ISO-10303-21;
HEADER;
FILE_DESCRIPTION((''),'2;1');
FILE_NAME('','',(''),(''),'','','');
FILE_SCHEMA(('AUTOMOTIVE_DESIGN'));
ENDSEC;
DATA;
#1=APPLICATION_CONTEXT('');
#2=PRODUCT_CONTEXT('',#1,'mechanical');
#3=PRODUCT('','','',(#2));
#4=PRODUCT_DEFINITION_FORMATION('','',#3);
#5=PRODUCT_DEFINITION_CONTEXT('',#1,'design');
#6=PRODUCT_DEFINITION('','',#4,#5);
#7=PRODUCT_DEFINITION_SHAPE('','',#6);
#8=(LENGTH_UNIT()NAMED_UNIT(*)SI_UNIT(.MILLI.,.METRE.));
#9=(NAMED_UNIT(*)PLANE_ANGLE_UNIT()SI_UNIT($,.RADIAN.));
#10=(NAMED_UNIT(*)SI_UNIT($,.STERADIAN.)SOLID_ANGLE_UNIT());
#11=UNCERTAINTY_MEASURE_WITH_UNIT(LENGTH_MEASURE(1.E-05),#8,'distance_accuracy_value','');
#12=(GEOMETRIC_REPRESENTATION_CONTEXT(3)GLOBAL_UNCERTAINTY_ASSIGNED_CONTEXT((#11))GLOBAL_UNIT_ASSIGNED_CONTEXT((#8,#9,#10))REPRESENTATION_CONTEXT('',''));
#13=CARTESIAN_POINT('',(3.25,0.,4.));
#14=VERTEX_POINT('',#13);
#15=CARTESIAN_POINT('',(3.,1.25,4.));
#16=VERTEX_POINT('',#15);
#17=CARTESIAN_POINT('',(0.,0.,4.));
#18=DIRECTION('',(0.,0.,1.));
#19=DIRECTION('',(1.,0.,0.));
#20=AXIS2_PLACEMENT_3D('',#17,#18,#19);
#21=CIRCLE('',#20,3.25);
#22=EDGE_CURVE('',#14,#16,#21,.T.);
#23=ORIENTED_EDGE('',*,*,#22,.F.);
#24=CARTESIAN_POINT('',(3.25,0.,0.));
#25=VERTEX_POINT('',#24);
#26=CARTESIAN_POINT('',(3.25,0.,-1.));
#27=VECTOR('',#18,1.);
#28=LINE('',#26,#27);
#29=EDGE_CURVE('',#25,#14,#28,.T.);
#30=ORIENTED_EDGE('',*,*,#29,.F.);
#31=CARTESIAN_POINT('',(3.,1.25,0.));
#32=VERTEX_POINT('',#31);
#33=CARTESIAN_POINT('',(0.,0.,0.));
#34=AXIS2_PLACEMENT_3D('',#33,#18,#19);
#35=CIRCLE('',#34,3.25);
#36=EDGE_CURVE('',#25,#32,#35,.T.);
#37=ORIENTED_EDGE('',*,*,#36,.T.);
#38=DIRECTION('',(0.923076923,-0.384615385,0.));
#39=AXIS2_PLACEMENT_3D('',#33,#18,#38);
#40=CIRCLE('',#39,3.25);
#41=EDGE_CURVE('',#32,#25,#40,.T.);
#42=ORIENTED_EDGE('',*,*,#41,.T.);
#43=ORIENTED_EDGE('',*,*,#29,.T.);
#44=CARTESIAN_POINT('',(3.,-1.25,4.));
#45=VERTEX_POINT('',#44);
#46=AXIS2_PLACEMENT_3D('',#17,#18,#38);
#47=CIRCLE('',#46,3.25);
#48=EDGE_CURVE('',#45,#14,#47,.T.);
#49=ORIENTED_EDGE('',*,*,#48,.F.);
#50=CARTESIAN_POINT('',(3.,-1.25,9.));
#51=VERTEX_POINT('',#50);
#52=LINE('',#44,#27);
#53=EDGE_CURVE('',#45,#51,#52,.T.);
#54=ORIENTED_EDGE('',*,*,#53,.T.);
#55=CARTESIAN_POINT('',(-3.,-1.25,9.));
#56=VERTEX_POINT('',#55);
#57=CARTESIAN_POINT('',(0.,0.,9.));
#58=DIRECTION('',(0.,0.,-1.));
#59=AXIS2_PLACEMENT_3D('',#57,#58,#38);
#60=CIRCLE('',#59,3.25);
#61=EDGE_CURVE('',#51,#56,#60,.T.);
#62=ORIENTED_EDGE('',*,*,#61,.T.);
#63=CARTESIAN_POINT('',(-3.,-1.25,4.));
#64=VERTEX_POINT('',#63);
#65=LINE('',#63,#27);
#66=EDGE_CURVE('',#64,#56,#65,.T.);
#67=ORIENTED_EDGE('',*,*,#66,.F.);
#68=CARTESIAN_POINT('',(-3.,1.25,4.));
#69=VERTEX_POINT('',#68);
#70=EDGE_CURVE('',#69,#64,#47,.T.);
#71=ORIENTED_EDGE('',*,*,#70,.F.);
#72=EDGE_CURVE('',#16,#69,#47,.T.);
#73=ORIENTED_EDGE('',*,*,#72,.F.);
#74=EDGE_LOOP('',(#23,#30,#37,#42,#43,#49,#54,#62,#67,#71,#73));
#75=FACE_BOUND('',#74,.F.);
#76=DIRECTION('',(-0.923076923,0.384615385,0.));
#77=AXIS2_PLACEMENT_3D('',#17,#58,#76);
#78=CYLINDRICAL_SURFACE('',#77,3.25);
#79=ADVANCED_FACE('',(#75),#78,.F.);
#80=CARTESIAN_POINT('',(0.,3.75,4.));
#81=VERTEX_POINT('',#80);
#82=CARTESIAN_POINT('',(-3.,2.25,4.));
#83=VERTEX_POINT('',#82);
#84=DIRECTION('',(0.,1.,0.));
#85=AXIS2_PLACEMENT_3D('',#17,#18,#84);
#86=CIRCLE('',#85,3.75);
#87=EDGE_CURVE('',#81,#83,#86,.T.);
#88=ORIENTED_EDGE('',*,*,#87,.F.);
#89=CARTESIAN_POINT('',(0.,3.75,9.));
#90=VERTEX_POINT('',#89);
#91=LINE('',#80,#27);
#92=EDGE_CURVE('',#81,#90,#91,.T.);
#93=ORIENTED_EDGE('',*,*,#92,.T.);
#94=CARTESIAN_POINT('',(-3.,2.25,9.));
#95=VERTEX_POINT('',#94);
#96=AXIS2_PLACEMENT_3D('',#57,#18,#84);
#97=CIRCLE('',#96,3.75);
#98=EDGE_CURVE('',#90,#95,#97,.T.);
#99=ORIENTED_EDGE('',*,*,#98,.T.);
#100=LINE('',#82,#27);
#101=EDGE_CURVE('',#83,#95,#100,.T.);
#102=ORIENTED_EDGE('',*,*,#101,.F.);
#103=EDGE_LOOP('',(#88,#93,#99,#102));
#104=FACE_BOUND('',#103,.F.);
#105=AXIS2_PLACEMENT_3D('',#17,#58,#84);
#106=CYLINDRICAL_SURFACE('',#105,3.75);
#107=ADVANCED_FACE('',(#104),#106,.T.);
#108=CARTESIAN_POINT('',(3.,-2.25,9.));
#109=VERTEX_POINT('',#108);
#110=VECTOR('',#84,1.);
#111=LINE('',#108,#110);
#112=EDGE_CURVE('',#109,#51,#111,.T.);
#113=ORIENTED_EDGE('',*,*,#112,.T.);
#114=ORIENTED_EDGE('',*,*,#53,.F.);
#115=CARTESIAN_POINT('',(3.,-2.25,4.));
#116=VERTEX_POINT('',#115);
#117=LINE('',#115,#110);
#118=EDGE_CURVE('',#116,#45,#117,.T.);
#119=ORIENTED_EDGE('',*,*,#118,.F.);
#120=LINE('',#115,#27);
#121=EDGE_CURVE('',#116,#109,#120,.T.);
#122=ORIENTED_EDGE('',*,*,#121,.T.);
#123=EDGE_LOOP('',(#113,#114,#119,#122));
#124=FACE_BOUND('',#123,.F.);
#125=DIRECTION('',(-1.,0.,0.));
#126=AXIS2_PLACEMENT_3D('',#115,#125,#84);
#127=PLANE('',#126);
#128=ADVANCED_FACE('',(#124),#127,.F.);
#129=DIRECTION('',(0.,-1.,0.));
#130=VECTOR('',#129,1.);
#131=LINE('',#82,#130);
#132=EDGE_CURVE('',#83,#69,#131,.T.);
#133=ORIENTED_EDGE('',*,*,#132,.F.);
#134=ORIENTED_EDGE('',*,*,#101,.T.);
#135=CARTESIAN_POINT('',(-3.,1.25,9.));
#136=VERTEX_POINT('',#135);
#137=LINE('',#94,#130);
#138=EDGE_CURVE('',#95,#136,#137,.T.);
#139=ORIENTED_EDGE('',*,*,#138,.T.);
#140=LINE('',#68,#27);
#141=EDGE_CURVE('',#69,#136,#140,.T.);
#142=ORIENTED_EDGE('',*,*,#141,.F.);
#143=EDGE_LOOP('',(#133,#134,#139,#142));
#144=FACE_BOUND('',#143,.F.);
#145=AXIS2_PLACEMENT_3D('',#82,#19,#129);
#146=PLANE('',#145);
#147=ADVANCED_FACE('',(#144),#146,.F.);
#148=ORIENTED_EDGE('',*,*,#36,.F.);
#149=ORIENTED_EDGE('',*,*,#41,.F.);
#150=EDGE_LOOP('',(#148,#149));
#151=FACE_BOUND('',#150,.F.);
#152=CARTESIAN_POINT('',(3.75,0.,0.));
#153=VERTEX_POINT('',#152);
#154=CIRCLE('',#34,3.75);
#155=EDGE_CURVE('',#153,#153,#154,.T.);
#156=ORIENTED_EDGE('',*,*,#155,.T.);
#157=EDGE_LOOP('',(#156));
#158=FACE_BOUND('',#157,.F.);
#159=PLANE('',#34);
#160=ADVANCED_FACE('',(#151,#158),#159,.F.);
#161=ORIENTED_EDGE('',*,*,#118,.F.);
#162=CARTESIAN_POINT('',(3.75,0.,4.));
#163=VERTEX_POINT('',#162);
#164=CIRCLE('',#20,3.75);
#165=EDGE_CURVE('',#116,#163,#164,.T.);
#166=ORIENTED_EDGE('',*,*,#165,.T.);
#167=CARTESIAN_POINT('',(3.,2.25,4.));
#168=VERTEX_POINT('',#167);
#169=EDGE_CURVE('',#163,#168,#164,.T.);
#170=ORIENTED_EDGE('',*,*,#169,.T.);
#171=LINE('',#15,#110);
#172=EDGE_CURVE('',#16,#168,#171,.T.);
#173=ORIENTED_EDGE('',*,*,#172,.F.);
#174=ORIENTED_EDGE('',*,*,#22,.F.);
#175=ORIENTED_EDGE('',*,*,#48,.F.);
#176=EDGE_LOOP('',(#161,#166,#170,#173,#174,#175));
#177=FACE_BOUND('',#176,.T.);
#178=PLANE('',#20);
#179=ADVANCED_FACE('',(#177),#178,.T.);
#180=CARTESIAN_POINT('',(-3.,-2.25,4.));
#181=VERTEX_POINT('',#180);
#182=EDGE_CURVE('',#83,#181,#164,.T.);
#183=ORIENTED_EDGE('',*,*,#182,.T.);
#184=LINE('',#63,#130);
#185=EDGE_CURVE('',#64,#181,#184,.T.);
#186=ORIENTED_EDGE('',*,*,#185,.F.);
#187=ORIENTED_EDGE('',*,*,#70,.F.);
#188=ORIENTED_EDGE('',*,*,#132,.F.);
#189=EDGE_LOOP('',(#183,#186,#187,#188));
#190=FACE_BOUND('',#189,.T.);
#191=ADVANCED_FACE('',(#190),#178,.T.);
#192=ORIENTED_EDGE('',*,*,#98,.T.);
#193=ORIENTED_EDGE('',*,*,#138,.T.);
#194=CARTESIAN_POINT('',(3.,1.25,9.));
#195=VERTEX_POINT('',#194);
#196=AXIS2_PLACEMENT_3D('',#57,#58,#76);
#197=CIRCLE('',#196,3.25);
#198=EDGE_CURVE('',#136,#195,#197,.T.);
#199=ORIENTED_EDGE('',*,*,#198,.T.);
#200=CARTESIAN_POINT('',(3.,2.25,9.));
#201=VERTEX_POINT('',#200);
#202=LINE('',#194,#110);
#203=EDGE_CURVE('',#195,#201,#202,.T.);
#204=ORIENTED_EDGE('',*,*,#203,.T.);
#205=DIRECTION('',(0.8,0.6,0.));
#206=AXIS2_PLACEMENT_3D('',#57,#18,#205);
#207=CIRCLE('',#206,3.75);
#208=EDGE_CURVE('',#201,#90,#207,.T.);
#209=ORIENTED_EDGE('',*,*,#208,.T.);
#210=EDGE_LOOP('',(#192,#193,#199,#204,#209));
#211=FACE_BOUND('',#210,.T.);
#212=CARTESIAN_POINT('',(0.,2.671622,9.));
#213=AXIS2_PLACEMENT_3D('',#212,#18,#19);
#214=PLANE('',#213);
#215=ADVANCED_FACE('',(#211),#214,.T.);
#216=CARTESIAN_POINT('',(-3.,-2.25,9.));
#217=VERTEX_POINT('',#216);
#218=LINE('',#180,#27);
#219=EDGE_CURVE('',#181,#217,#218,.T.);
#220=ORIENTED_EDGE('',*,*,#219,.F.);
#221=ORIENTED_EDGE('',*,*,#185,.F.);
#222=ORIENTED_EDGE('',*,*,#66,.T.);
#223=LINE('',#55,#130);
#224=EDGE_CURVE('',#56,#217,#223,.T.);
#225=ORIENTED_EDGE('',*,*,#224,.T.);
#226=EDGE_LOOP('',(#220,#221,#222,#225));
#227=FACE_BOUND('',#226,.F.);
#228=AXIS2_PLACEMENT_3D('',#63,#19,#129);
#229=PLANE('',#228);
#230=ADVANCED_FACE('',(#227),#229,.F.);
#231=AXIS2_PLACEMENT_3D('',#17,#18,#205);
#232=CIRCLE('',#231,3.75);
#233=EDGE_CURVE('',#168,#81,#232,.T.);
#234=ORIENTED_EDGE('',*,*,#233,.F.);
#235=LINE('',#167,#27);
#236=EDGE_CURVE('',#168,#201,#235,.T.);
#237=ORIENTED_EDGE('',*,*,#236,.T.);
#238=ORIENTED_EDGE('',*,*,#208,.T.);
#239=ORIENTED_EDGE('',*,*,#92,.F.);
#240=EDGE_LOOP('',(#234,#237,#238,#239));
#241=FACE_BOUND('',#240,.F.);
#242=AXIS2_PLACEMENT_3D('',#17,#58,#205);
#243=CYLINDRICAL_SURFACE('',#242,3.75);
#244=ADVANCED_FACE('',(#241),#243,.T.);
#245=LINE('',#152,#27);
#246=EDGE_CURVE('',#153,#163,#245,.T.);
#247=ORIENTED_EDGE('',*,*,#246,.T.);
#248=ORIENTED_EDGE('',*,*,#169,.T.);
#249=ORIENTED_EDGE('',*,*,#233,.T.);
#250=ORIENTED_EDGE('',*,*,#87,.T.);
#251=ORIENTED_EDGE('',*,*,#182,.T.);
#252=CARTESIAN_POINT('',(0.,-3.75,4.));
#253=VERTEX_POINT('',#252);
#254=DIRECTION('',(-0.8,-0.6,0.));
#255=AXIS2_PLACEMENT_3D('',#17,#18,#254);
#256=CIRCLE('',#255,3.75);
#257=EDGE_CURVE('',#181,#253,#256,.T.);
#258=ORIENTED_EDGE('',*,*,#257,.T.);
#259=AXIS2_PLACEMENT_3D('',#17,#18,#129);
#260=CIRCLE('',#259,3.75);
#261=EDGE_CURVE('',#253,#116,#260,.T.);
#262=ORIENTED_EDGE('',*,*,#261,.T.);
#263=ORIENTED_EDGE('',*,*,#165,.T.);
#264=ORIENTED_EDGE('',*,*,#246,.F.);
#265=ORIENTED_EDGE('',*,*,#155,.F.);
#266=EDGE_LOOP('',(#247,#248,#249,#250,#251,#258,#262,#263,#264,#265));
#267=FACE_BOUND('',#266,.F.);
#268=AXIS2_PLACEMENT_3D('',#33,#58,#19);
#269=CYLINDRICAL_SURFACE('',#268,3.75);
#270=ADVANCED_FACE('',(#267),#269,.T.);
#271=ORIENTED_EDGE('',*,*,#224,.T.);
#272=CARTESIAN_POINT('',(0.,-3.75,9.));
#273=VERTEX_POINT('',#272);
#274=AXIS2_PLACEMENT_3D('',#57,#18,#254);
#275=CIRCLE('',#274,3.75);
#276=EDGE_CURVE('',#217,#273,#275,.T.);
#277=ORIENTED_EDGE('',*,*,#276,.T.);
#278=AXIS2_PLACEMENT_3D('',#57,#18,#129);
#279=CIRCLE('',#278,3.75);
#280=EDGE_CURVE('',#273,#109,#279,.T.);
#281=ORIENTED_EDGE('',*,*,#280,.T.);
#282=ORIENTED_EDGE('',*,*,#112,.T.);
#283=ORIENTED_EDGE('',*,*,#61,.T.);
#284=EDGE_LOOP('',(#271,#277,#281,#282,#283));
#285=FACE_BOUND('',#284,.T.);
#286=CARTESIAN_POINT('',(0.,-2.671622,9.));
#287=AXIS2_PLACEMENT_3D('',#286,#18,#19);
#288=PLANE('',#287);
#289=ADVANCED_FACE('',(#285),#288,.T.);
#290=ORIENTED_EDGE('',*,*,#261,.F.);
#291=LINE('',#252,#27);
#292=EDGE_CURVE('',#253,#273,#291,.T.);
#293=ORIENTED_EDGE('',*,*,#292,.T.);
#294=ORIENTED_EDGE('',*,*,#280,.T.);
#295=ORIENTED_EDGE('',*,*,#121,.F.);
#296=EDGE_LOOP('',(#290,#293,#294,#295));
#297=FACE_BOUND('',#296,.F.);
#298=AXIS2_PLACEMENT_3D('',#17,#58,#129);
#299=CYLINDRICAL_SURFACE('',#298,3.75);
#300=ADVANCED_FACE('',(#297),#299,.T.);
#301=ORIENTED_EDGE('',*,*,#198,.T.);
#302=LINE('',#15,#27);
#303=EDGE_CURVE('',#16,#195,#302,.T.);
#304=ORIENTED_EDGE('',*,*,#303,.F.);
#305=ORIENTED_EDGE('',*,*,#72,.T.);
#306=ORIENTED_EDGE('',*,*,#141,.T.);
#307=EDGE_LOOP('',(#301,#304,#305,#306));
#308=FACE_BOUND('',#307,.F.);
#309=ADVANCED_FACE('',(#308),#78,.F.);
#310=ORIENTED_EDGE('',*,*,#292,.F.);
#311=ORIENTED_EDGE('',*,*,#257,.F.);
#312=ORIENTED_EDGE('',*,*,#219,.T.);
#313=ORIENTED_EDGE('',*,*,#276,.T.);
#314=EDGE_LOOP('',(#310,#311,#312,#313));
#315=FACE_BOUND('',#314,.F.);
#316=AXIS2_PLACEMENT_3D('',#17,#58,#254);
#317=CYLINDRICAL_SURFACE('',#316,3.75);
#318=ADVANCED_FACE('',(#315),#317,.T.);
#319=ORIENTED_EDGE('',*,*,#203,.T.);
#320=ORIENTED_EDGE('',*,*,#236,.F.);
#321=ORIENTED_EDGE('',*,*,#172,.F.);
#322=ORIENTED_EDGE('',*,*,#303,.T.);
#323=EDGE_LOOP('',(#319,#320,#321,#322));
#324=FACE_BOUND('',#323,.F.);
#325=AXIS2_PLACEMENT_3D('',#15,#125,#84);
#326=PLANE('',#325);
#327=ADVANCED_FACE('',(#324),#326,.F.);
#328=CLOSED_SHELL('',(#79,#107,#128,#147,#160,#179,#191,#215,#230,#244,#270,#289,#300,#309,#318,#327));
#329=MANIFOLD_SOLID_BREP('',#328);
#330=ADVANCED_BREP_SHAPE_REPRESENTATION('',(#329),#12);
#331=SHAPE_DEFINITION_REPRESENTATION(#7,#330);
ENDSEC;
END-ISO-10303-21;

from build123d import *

# Parameters (mm, degrees)
F0_R     = 3.75
F1_DEPTH = 4
F3_DEPTH = 5
F4_DEPTH = 5


with BuildPart() as f1:
    # F0 (on Top) → F1 (new body)
    with BuildSketch(Plane.XY):
        Circle(F0_R)
    extrude(amount=F1_DEPTH)

    # F2 (on face) → F3 (cut, symmetric)
    with BuildSketch(Plane.XY.offset(4)):
        with BuildLine():
            ThreePointArc((3, -1.25), (3.186887196, -0.6373774392), (3.25, 0))
            ThreePointArc((3.25, 0), (3.186887196, 0.6373774392), (3, 1.25))
            ThreePointArc((3, 1.25), (0, 3.25), (-3, 1.25))
            ThreePointArc((-3, 1.25), (-3.25, 0), (-3, -1.25))
            ThreePointArc((-3, -1.25), (0, -3.25), (3, -1.25))
        make_face()
    extrude(amount=F3_DEPTH, both=True, mode=Mode.SUBTRACT)

    # F2 (on face) → F4 (join)
    with BuildSketch(Plane.XY.offset(4)):
        with BuildLine():
            ThreePointArc((-3, 1.25), (0, 3.25), (3, 1.25))
            Line((3, 1.25), (3, 2.25))
            ThreePointArc((3, 2.25), (1.6770509831, 3.3541019662), (0, 3.75))
            ThreePointArc((0, 3.75), (-1.6770509831, 3.3541019662), (-3, 2.25))
            Line((-3, 2.25), (-3, 1.25))
        make_face()
        with BuildLine():
            Line((3, -2.25), (3, -1.25))
            ThreePointArc((3, -1.25), (0, -3.25), (-3, -1.25))
            Line((-3, -1.25), (-3, -2.25))
            ThreePointArc((-3, -2.25), (-1.6770509831, -3.3541019662), (0, -3.75))
            ThreePointArc((0, -3.75), (1.6770509831, -3.3541019662), (3, -2.25))
        make_face()
    extrude(amount=F4_DEPTH)


solid = f1.part
